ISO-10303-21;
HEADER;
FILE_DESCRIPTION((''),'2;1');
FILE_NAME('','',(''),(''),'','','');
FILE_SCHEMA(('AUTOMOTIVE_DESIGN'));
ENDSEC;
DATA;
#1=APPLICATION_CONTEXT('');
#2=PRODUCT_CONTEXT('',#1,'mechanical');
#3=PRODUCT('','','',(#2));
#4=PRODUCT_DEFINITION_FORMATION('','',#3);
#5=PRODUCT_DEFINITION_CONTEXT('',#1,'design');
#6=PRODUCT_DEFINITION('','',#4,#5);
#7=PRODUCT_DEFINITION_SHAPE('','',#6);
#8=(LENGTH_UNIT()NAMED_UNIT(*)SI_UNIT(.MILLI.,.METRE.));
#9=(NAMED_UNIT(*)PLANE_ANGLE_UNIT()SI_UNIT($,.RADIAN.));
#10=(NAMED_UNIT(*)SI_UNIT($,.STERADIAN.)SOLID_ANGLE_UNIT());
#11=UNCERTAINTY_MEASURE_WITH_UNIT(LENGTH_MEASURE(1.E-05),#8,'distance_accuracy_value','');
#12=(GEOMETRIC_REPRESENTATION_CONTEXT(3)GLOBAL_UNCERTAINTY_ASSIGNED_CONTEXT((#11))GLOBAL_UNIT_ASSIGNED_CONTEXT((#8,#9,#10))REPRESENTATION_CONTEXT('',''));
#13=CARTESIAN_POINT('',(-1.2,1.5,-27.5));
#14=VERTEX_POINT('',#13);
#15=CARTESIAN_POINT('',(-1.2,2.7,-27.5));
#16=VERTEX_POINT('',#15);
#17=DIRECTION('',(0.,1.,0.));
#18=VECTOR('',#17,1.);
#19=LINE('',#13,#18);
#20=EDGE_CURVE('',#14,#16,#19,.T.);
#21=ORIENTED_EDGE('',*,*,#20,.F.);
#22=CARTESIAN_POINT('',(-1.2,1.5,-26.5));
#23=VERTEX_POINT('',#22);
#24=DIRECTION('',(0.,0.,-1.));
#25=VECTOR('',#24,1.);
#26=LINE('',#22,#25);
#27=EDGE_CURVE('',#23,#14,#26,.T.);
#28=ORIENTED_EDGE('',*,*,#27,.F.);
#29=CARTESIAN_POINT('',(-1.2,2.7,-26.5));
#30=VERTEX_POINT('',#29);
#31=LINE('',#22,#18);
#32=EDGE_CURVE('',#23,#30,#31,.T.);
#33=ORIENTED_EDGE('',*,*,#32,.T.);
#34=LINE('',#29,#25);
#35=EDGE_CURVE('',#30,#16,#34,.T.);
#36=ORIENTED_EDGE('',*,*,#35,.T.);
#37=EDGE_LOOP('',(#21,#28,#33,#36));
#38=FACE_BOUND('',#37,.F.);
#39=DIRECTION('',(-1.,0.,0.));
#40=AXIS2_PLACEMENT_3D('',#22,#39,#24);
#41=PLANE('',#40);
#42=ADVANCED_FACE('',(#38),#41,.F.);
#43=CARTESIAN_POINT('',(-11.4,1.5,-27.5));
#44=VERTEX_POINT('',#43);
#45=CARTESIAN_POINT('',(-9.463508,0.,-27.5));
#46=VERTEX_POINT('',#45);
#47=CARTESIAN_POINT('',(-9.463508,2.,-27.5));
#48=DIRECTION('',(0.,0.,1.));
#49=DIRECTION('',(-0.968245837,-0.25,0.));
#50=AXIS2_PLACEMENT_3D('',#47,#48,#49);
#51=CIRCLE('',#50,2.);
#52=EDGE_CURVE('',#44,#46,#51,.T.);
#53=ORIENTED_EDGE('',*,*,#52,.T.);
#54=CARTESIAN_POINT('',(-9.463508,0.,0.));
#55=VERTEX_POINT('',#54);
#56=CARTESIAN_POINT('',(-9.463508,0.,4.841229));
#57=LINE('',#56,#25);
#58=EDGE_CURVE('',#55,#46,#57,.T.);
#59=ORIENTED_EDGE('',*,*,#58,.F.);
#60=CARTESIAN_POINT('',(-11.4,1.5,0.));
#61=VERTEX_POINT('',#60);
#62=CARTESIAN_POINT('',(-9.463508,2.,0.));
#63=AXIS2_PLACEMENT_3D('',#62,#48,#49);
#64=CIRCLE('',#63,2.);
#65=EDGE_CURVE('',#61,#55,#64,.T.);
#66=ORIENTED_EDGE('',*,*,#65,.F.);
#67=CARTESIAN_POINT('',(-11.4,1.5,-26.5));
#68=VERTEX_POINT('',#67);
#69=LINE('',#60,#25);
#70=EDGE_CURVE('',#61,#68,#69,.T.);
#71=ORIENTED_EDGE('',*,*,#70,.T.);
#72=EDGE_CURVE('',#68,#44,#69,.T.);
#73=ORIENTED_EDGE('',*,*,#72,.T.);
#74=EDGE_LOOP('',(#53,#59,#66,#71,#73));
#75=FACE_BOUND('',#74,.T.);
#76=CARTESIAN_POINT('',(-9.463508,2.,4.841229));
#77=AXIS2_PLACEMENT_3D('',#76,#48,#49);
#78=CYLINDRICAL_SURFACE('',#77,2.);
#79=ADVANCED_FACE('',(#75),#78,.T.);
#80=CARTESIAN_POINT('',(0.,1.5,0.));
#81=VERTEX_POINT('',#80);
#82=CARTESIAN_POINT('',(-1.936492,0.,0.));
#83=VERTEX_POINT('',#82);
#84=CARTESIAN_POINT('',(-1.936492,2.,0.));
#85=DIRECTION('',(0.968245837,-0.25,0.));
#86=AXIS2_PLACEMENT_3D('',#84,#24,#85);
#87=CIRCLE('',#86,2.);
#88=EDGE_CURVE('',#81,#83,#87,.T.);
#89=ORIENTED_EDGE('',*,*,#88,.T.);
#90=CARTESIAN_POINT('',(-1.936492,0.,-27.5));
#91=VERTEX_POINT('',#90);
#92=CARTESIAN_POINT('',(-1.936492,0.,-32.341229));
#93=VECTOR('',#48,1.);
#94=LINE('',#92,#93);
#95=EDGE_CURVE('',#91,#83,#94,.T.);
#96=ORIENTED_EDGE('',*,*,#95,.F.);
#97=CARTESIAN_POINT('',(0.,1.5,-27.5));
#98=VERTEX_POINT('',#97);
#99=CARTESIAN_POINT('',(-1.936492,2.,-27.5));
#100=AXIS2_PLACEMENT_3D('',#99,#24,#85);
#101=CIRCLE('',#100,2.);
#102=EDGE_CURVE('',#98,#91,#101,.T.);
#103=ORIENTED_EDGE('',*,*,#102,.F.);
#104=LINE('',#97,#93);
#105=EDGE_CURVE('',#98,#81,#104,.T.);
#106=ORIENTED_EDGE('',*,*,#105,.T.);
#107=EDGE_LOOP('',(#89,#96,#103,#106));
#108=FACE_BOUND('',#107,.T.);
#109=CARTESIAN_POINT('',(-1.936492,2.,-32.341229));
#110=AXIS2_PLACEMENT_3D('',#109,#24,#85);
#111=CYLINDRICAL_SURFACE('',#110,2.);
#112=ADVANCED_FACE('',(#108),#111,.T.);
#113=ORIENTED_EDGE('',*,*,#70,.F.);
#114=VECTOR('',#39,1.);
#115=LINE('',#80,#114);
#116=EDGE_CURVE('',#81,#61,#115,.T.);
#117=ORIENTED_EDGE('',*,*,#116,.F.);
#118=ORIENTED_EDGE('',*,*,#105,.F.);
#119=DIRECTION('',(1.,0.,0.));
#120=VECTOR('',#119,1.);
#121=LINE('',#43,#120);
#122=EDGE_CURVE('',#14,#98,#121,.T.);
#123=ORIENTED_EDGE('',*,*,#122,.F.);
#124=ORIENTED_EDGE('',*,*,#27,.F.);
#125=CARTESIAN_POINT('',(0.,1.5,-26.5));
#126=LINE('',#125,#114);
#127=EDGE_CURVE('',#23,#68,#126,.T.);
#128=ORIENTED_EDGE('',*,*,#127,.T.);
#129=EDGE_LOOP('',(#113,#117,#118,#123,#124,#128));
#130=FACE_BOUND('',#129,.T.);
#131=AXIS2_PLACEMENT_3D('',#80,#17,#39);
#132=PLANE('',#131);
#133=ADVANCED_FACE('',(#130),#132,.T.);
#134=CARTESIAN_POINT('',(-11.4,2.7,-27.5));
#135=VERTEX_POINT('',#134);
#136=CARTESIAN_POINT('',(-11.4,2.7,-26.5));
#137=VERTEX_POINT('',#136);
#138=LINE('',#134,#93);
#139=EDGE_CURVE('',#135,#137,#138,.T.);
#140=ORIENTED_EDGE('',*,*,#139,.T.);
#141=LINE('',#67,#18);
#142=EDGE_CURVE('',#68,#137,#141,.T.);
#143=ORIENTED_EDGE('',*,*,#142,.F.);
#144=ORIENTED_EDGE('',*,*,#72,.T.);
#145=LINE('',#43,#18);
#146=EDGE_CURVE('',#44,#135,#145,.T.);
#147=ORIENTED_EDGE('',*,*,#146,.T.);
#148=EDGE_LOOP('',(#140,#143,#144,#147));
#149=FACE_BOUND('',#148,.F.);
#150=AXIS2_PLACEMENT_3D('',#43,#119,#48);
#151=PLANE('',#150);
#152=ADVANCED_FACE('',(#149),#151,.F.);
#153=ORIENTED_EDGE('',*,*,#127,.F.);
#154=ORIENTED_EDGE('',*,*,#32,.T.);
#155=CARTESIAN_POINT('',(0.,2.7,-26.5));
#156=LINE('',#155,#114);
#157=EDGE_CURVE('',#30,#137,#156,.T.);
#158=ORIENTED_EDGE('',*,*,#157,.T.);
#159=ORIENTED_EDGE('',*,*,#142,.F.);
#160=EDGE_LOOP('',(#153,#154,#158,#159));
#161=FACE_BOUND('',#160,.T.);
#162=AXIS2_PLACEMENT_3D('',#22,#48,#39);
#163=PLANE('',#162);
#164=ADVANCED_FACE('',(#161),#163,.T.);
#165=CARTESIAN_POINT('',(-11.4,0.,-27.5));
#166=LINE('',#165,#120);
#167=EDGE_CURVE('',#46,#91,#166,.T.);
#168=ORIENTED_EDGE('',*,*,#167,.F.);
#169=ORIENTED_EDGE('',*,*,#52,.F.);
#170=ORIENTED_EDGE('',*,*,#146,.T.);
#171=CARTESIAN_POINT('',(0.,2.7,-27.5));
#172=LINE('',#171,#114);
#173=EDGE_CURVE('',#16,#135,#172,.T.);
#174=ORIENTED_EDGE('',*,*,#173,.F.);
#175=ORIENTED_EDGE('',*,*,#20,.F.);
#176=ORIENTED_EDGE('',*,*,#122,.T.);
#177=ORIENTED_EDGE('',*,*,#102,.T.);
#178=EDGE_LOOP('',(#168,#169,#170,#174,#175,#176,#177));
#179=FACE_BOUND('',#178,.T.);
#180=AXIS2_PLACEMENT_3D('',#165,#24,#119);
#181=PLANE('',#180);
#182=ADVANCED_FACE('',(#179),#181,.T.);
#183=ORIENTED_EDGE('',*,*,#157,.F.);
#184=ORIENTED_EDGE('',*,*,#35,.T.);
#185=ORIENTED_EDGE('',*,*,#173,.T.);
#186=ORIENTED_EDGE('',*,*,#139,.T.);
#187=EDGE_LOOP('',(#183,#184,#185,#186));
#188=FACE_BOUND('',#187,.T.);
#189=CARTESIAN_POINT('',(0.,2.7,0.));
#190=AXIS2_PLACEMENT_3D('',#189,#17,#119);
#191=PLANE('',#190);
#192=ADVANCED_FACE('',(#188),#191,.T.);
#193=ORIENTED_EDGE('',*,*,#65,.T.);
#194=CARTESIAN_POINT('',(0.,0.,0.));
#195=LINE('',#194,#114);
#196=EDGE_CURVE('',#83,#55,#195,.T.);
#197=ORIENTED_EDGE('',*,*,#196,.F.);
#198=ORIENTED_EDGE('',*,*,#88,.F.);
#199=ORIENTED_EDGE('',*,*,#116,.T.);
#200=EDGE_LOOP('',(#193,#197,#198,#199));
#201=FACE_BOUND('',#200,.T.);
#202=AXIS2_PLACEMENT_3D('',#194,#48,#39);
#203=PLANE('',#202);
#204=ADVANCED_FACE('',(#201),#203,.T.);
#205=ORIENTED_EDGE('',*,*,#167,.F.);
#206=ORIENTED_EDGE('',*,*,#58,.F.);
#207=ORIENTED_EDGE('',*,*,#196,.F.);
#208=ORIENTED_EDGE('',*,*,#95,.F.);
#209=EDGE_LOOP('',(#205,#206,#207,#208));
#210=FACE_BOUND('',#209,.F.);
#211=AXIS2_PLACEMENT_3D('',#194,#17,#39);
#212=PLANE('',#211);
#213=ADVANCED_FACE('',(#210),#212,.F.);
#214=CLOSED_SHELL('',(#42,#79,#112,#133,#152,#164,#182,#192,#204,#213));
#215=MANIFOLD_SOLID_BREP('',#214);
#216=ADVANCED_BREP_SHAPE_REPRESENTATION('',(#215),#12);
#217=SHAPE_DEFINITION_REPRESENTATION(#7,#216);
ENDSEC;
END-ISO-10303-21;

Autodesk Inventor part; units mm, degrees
ref_plane "YZ Plane" through (0, 0, 0) normal (1, 0, 0) x (0, 1, 0)
ref_plane "XZ Plane" through (0, 0, 0) normal (0, 1, 0) x (-1, 0, 0)
ref_plane "XY Plane" through (0, 0, 0) normal (0, 0, 1) x (1, 0, 0)
sketch "스케치1" plane through (0, 0, 0) normal (0, 1, 0) x (-1, 0, 0)
  line L0 (0, 0) -> (11.4, 0)
  line L1 (11.4, 0) -> (11.4, -27.5)
  line L2 (11.4, -27.5) -> (0, -27.5)
  line L3 (0, -27.5) -> (0, 0)
  dimension "d0" = 11.4
  dimension "d1" = 27.5
extrude "돌출1" add sketch "스케치1" along normal blind 1.5
fillet "모깎기1" radius 2 2 edges at (-11.4, 0, -13.75) (0, 0, -13.75)
sketch "스케치4" plane through (0, 1.5, 0) normal (0, 1, 0) x (1, 0, 0)
  line L0 (-11.4, 27.5) -> (-11.4, 0) projected
  line L1 (0, 0) -> (0, 27.5) projected
  line L2 (0, 27.5) -> (-11.4, 27.5) projected
  line L3 (-11.4, 27.5) -> (0, 27.5)
  line L4 (0, 27.5) -> (0, 26.5)
  line L5 (0, 26.5) -> (-11.4, 26.5)
  line L6 (-11.4, 26.5) -> (-11.4, 27.5)
  line L7 (-1.2, 26.5) -> (-1.2, 27.5)
  dimension "d18" = 1
  dimension "d21" = 1.2
extrude "돌출4" add sketch "스케치4" along normal blind 1.2 contours L2 L7 L5 L0
properties part number "_3D 인쇄"
